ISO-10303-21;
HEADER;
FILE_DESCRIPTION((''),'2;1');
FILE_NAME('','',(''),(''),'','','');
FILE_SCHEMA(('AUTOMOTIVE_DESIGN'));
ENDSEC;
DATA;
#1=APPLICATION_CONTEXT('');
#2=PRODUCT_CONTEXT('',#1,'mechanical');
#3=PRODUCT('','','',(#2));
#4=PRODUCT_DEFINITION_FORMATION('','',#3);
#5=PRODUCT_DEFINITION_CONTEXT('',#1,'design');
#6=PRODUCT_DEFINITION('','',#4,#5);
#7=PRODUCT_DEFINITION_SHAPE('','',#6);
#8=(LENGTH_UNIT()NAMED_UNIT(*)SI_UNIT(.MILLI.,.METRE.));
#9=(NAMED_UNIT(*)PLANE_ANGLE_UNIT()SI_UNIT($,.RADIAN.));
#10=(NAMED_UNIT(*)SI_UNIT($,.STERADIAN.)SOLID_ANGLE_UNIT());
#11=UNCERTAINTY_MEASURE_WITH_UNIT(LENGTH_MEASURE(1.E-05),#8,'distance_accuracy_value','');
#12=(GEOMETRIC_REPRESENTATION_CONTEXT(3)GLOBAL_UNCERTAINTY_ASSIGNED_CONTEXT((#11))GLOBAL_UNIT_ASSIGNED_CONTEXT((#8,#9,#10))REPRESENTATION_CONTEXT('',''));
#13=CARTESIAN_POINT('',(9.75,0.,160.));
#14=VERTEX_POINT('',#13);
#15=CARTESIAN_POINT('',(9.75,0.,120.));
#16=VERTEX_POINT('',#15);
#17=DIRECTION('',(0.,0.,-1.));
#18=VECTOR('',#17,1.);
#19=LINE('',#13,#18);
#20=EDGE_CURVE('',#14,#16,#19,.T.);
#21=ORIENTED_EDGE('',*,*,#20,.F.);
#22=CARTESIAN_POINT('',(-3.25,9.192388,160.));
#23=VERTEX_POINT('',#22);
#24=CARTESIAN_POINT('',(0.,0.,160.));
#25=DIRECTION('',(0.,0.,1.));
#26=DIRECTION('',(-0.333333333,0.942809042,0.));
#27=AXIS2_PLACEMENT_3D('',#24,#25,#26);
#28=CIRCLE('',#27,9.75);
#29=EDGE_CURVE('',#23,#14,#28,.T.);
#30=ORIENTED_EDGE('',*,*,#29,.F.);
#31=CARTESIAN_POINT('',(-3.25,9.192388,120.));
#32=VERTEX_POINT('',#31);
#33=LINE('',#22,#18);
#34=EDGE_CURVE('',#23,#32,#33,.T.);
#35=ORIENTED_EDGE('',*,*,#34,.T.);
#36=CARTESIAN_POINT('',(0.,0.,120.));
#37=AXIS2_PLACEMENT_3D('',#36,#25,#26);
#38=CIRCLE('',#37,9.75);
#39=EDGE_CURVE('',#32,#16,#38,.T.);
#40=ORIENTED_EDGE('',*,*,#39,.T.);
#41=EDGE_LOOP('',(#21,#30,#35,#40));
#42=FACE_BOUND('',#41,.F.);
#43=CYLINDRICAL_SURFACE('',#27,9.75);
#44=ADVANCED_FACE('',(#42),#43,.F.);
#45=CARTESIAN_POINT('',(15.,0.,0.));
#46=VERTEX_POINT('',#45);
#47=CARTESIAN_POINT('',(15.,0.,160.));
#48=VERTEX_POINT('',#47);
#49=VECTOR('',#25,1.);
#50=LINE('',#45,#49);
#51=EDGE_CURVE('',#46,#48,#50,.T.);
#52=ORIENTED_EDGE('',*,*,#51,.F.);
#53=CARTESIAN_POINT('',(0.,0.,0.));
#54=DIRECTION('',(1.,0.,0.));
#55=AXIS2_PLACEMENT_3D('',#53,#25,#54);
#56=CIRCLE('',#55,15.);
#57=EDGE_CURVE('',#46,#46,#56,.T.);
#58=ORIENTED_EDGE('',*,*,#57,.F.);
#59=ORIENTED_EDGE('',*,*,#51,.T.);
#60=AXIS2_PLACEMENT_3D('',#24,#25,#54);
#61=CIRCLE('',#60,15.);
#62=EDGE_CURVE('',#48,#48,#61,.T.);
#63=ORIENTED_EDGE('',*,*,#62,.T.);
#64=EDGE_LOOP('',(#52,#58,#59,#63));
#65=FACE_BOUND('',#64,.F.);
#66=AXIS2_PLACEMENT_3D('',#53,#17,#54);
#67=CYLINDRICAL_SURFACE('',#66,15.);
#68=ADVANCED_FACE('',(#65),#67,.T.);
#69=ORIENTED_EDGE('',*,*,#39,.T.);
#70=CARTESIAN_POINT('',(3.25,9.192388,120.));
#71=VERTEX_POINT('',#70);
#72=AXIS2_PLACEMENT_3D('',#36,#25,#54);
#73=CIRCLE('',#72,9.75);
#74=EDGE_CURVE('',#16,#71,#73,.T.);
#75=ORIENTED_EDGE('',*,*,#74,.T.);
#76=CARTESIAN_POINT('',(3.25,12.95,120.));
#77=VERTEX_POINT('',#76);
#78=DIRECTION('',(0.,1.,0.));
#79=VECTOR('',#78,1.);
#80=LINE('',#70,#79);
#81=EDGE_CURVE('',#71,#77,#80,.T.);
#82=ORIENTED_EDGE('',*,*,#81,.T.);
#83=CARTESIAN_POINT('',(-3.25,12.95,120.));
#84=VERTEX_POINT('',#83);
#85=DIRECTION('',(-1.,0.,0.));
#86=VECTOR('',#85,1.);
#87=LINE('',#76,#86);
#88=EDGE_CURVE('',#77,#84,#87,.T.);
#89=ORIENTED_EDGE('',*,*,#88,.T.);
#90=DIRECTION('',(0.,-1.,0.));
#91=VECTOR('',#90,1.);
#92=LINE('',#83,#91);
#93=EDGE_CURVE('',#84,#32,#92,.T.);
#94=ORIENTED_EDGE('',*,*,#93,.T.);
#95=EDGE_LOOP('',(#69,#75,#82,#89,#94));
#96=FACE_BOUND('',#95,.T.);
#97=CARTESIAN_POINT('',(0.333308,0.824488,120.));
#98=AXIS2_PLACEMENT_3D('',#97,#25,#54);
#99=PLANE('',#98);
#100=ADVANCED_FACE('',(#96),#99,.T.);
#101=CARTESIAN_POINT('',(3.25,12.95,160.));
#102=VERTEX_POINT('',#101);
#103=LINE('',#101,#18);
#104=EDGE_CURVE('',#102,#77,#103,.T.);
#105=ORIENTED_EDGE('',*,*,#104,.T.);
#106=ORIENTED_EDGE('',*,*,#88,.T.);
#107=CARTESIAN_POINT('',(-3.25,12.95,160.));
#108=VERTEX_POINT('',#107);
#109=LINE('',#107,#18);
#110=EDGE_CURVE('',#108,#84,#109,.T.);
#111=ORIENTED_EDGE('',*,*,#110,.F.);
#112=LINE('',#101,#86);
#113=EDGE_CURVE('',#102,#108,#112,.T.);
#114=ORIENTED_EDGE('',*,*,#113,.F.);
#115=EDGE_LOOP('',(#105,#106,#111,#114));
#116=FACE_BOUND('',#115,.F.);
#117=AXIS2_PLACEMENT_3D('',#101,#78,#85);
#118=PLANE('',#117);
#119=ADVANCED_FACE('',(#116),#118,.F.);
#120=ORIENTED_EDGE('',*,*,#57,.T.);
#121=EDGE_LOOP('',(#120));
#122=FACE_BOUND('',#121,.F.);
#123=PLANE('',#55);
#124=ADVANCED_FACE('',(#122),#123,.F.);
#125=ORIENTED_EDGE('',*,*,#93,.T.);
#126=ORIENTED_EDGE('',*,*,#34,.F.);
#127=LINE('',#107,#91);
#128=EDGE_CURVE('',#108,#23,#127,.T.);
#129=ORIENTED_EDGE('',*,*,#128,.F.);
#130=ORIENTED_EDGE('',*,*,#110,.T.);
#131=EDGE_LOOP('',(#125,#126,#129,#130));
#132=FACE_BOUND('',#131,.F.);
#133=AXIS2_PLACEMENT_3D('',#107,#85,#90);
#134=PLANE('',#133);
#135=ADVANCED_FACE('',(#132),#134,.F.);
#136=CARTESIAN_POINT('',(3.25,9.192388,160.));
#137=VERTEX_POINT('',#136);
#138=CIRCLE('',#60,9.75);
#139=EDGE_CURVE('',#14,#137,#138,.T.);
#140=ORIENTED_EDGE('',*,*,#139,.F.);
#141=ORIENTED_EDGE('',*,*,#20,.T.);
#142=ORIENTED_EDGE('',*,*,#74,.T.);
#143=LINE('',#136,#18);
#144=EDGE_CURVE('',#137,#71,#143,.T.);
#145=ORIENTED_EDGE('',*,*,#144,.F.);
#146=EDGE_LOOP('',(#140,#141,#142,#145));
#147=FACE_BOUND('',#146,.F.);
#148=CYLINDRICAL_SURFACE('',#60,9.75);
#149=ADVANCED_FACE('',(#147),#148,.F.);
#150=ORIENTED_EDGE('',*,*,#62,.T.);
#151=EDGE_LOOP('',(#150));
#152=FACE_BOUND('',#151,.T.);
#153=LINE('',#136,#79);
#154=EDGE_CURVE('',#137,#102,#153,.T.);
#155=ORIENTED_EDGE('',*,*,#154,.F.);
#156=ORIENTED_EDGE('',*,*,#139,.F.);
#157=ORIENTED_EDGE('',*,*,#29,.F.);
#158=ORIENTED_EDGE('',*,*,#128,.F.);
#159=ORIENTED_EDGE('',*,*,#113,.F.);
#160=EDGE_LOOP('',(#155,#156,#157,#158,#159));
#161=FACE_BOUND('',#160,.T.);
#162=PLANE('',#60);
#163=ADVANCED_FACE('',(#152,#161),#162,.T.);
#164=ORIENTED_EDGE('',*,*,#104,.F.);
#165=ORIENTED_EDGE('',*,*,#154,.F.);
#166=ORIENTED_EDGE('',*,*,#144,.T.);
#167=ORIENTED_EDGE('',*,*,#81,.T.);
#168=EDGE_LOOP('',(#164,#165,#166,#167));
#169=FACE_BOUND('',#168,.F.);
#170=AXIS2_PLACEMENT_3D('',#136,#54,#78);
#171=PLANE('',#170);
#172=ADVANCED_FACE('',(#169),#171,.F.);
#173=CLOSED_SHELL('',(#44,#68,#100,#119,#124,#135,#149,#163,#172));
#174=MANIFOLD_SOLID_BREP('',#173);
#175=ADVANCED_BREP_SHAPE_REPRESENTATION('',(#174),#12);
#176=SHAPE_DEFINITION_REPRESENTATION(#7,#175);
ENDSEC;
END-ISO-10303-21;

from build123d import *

# Parameters (mm, degrees)
F0_R     = 15
F1_DEPTH = 160
F3_DEPTH = 40


# Not quite as in the source:
# - a feature names something its author has since deleted; it is built from what else it names


with BuildPart() as f1:
    # F0 (on Top) → F1 (new body)
    with BuildSketch(Plane.XY):
        Circle(F0_R)
    extrude(amount=F1_DEPTH)

    # F2 (on face) → F3 (cut)
    with BuildSketch(Plane.XY.offset(160)):
        with BuildLine():
            ThreePointArc((-3.25, 9.1923881554), (-5.6291651246, -7.960841664), (9.75, 0))
            ThreePointArc((9.75, 0), (7.960841664, 5.6291651246), (3.25, 9.1923881554))
            Line((3.25, 9.1923881554), (3.25, 6.55))
            Line((3.25, 6.55), (-3.25, 6.55))
            Line((-3.25, 6.55), (-3.25, 9.1923881554))
        make_face()
        with BuildLine():
            Line((3.25, 6.55), (3.25, 9.1923881554))
            ThreePointArc((3.25, 9.1923881554), (0, 9.75), (-3.25, 9.1923881554))
            Line((-3.25, 9.1923881554), (-3.25, 6.55))
            Line((-3.25, 6.55), (3.25, 6.55))
        make_face()
        with BuildLine():
            ThreePointArc((-3.25, 9.1923881554), (0, 9.75), (3.25, 9.1923881554))
            Line((3.25, 9.1923881554), (3.25, 12.95))
            Line((3.25, 12.95), (-3.25, 12.95))
            Line((-3.25, 12.95), (-3.25, 9.1923881554))
        make_face()
    extrude(amount=-F3_DEPTH, mode=Mode.SUBTRACT)


solid = f1.part
